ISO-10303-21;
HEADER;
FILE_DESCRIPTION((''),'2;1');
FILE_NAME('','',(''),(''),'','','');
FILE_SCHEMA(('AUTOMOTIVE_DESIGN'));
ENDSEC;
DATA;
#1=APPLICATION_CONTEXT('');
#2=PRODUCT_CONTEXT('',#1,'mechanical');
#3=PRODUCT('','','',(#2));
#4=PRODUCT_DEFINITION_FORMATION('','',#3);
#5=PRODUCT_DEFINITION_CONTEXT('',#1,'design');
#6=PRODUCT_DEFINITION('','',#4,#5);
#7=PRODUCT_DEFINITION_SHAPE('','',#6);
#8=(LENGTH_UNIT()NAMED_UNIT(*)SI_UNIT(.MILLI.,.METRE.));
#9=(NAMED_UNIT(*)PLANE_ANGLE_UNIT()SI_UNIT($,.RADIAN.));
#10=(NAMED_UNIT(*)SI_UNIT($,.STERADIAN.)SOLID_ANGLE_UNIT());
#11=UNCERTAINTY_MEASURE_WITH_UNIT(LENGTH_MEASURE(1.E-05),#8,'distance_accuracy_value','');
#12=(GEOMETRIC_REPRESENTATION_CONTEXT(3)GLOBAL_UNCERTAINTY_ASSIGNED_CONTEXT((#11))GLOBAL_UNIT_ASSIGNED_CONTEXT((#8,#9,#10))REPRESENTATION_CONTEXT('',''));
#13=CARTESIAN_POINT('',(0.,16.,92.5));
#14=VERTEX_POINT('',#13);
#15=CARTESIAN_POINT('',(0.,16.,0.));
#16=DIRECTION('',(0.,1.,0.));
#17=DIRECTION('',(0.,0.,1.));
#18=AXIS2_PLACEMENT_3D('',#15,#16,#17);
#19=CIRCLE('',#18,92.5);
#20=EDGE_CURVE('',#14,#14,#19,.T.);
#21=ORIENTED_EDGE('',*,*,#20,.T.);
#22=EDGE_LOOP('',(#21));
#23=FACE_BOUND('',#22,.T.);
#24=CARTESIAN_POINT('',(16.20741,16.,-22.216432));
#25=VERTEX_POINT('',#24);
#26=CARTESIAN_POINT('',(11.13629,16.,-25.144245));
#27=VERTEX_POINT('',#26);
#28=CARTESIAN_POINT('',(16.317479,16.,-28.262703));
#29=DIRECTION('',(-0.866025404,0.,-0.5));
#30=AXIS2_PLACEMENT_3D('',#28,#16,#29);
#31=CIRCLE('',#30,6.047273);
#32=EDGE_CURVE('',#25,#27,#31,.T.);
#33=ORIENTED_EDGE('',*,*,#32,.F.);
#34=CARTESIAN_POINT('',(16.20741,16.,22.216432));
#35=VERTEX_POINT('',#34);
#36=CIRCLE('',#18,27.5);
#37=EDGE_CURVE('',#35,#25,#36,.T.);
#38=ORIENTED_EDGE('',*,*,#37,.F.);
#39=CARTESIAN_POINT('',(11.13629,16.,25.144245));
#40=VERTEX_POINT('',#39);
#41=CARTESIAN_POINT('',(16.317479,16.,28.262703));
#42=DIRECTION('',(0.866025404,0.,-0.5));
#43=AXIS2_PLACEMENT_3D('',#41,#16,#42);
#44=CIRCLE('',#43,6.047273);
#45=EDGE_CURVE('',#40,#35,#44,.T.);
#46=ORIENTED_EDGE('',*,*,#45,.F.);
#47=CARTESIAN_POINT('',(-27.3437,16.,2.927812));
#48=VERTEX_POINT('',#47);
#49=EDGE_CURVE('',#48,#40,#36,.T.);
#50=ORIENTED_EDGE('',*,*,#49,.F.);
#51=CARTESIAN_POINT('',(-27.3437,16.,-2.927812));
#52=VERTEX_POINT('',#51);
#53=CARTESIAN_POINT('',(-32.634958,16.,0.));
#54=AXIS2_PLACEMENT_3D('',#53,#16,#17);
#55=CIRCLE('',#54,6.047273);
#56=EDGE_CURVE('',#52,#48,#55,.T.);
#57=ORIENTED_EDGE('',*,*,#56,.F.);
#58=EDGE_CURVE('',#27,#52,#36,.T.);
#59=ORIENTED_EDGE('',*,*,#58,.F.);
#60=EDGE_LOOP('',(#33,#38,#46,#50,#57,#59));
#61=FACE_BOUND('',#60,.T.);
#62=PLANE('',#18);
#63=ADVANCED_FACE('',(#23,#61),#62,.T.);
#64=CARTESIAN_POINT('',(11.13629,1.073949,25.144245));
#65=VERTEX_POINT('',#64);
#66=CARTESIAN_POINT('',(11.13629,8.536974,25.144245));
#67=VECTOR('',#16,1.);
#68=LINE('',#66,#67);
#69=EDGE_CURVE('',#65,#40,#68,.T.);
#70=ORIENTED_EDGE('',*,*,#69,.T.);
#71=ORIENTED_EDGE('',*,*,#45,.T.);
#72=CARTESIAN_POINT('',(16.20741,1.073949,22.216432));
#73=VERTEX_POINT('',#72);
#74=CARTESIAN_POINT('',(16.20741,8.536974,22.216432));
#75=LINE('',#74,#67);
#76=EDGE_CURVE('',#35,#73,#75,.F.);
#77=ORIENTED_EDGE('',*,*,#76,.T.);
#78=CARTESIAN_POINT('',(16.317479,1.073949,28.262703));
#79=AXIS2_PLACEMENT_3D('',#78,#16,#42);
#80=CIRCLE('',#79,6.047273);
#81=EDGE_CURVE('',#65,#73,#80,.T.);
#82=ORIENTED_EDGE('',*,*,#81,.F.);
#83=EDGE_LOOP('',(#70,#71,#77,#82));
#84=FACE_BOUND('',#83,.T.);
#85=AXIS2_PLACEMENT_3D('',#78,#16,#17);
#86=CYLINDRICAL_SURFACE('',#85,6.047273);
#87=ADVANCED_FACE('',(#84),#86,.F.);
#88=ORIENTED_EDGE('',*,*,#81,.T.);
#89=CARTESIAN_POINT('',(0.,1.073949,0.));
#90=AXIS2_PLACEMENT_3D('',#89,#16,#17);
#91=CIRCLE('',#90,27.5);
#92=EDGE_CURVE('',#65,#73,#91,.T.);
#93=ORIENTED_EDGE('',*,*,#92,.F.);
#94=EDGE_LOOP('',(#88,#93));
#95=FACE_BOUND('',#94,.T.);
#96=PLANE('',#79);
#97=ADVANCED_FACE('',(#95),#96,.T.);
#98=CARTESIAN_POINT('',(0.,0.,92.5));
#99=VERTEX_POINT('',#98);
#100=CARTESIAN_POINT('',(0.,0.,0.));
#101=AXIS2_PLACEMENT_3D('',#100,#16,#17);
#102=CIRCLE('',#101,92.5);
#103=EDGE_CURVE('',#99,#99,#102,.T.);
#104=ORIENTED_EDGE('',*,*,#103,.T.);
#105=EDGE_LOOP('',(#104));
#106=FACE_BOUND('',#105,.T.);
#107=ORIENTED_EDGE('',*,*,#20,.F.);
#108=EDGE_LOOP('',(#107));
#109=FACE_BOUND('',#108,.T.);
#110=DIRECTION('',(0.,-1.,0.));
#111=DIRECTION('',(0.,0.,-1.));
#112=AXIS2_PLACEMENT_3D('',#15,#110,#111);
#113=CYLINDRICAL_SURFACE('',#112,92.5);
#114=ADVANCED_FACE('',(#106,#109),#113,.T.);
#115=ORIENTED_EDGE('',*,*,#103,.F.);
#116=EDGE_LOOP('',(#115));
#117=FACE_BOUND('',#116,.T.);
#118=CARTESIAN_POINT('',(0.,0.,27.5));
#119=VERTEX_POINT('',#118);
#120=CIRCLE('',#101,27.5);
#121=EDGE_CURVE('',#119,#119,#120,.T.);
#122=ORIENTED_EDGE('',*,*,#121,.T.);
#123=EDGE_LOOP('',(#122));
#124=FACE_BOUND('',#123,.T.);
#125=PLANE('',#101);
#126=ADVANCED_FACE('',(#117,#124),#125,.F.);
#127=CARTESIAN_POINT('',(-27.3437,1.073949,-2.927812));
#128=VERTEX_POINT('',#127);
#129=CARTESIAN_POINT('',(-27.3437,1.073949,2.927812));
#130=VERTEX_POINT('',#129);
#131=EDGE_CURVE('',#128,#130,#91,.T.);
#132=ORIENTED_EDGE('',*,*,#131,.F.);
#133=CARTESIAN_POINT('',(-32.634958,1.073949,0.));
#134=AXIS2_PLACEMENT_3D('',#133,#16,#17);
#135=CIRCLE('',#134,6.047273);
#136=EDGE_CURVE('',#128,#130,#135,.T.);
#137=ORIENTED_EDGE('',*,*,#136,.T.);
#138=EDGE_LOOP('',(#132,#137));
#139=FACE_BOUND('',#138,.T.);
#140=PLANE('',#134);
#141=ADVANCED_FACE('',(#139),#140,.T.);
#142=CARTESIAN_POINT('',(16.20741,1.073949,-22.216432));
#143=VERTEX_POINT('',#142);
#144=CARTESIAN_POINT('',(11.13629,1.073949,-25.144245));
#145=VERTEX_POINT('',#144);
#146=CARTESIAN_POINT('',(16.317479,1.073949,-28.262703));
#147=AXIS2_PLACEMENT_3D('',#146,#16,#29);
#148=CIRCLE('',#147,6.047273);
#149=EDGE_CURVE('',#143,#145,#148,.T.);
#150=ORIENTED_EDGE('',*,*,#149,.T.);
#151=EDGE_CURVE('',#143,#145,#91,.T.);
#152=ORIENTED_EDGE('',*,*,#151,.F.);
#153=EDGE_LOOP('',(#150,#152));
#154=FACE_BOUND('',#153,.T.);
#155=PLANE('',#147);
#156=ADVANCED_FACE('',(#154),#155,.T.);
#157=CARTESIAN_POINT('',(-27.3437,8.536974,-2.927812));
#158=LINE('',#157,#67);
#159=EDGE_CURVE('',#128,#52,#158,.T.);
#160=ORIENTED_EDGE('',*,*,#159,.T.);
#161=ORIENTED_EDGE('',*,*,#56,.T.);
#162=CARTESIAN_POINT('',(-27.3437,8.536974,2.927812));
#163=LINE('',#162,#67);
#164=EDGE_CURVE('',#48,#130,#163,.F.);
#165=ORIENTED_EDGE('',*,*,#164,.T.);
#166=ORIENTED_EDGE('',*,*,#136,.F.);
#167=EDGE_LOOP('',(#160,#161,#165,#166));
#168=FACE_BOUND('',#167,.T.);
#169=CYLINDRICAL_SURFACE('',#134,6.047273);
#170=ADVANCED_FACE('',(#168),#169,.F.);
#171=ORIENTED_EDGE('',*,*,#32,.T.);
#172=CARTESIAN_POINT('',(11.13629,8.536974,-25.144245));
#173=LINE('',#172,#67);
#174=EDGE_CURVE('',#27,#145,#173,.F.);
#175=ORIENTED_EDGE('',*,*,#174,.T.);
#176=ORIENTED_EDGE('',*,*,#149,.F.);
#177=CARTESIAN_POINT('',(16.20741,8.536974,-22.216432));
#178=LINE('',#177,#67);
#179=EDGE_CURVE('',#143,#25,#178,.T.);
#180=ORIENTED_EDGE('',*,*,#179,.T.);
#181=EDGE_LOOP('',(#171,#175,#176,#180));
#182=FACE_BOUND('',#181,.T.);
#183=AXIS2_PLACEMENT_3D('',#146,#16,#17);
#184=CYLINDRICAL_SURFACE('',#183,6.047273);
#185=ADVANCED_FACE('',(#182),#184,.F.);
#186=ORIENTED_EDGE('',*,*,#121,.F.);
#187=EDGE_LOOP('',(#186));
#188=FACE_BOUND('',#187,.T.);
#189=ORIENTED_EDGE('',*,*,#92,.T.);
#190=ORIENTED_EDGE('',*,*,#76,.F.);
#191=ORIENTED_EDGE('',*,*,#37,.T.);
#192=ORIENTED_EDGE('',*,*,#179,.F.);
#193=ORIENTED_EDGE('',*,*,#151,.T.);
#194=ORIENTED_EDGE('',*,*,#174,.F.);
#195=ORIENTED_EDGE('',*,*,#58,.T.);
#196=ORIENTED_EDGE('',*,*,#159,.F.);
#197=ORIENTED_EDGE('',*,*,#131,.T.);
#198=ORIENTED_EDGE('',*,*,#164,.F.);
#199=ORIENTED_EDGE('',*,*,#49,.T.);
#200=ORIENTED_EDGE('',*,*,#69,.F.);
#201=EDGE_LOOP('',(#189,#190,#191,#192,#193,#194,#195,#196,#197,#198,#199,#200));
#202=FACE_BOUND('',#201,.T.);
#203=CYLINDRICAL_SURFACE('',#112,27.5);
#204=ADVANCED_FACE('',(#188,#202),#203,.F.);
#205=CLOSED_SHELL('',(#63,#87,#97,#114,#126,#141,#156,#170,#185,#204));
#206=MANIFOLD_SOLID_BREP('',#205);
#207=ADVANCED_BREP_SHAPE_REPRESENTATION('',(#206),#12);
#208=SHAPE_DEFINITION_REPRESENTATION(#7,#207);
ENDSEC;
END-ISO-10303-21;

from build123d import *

# Parameters (mm, degrees)
SKETCH1_R           = 92.5
BOSS_EXTRUDE1_DEPTH = 16
SKETCH2_R           = 27.5
CUT_EXTRUDE1_DEPTH  = 132.789605053
SKETCH3_R           = 6.047272506
CUT_EXTRUDE2_DEPTH  = 14.926051379
CIRPATTERN1_COUNT   = 3


with BuildPart() as part:
    # Sketch1 → Boss-Extrude1 (new body)
    with BuildSketch(Plane(origin=(0, 0, 0), x_dir=(1, 0, 0), z_dir=(0, 1, 0))):
        Circle(SKETCH1_R)
    extrude(amount=BOSS_EXTRUDE1_DEPTH)

    # Sketch2 → Cut-Extrude1 (cut, through all)
    with BuildSketch(Plane(origin=(0, 0, 0), x_dir=(1, 0, 0), z_dir=(0, 1, 0))):
        Circle(SKETCH2_R)
    extrude(amount=CUT_EXTRUDE1_DEPTH, mode=Mode.SUBTRACT)

    # Sketch3 → Cut-Extrude2 (cut)
    with BuildSketch(Plane(origin=(0, 16, 0), x_dir=(1, 0, 0), z_dir=(0, 1, 0))):
        with Locations((-32.634958459, 0)):
            Circle(SKETCH3_R)
    cut_extrude2 = extrude(amount=-CUT_EXTRUDE2_DEPTH, mode=Mode.SUBTRACT)

    # CirPattern1: Cut-Extrude2 ×3 about axis
    cirpattern1_axis = Axis((0, 0, 0), (0, 1, 0))
    for i in range(1, CIRPATTERN1_COUNT):
        add(cut_extrude2.rotate(cirpattern1_axis, i * 360 / CIRPATTERN1_COUNT), mode=Mode.SUBTRACT)


solid = part.part
